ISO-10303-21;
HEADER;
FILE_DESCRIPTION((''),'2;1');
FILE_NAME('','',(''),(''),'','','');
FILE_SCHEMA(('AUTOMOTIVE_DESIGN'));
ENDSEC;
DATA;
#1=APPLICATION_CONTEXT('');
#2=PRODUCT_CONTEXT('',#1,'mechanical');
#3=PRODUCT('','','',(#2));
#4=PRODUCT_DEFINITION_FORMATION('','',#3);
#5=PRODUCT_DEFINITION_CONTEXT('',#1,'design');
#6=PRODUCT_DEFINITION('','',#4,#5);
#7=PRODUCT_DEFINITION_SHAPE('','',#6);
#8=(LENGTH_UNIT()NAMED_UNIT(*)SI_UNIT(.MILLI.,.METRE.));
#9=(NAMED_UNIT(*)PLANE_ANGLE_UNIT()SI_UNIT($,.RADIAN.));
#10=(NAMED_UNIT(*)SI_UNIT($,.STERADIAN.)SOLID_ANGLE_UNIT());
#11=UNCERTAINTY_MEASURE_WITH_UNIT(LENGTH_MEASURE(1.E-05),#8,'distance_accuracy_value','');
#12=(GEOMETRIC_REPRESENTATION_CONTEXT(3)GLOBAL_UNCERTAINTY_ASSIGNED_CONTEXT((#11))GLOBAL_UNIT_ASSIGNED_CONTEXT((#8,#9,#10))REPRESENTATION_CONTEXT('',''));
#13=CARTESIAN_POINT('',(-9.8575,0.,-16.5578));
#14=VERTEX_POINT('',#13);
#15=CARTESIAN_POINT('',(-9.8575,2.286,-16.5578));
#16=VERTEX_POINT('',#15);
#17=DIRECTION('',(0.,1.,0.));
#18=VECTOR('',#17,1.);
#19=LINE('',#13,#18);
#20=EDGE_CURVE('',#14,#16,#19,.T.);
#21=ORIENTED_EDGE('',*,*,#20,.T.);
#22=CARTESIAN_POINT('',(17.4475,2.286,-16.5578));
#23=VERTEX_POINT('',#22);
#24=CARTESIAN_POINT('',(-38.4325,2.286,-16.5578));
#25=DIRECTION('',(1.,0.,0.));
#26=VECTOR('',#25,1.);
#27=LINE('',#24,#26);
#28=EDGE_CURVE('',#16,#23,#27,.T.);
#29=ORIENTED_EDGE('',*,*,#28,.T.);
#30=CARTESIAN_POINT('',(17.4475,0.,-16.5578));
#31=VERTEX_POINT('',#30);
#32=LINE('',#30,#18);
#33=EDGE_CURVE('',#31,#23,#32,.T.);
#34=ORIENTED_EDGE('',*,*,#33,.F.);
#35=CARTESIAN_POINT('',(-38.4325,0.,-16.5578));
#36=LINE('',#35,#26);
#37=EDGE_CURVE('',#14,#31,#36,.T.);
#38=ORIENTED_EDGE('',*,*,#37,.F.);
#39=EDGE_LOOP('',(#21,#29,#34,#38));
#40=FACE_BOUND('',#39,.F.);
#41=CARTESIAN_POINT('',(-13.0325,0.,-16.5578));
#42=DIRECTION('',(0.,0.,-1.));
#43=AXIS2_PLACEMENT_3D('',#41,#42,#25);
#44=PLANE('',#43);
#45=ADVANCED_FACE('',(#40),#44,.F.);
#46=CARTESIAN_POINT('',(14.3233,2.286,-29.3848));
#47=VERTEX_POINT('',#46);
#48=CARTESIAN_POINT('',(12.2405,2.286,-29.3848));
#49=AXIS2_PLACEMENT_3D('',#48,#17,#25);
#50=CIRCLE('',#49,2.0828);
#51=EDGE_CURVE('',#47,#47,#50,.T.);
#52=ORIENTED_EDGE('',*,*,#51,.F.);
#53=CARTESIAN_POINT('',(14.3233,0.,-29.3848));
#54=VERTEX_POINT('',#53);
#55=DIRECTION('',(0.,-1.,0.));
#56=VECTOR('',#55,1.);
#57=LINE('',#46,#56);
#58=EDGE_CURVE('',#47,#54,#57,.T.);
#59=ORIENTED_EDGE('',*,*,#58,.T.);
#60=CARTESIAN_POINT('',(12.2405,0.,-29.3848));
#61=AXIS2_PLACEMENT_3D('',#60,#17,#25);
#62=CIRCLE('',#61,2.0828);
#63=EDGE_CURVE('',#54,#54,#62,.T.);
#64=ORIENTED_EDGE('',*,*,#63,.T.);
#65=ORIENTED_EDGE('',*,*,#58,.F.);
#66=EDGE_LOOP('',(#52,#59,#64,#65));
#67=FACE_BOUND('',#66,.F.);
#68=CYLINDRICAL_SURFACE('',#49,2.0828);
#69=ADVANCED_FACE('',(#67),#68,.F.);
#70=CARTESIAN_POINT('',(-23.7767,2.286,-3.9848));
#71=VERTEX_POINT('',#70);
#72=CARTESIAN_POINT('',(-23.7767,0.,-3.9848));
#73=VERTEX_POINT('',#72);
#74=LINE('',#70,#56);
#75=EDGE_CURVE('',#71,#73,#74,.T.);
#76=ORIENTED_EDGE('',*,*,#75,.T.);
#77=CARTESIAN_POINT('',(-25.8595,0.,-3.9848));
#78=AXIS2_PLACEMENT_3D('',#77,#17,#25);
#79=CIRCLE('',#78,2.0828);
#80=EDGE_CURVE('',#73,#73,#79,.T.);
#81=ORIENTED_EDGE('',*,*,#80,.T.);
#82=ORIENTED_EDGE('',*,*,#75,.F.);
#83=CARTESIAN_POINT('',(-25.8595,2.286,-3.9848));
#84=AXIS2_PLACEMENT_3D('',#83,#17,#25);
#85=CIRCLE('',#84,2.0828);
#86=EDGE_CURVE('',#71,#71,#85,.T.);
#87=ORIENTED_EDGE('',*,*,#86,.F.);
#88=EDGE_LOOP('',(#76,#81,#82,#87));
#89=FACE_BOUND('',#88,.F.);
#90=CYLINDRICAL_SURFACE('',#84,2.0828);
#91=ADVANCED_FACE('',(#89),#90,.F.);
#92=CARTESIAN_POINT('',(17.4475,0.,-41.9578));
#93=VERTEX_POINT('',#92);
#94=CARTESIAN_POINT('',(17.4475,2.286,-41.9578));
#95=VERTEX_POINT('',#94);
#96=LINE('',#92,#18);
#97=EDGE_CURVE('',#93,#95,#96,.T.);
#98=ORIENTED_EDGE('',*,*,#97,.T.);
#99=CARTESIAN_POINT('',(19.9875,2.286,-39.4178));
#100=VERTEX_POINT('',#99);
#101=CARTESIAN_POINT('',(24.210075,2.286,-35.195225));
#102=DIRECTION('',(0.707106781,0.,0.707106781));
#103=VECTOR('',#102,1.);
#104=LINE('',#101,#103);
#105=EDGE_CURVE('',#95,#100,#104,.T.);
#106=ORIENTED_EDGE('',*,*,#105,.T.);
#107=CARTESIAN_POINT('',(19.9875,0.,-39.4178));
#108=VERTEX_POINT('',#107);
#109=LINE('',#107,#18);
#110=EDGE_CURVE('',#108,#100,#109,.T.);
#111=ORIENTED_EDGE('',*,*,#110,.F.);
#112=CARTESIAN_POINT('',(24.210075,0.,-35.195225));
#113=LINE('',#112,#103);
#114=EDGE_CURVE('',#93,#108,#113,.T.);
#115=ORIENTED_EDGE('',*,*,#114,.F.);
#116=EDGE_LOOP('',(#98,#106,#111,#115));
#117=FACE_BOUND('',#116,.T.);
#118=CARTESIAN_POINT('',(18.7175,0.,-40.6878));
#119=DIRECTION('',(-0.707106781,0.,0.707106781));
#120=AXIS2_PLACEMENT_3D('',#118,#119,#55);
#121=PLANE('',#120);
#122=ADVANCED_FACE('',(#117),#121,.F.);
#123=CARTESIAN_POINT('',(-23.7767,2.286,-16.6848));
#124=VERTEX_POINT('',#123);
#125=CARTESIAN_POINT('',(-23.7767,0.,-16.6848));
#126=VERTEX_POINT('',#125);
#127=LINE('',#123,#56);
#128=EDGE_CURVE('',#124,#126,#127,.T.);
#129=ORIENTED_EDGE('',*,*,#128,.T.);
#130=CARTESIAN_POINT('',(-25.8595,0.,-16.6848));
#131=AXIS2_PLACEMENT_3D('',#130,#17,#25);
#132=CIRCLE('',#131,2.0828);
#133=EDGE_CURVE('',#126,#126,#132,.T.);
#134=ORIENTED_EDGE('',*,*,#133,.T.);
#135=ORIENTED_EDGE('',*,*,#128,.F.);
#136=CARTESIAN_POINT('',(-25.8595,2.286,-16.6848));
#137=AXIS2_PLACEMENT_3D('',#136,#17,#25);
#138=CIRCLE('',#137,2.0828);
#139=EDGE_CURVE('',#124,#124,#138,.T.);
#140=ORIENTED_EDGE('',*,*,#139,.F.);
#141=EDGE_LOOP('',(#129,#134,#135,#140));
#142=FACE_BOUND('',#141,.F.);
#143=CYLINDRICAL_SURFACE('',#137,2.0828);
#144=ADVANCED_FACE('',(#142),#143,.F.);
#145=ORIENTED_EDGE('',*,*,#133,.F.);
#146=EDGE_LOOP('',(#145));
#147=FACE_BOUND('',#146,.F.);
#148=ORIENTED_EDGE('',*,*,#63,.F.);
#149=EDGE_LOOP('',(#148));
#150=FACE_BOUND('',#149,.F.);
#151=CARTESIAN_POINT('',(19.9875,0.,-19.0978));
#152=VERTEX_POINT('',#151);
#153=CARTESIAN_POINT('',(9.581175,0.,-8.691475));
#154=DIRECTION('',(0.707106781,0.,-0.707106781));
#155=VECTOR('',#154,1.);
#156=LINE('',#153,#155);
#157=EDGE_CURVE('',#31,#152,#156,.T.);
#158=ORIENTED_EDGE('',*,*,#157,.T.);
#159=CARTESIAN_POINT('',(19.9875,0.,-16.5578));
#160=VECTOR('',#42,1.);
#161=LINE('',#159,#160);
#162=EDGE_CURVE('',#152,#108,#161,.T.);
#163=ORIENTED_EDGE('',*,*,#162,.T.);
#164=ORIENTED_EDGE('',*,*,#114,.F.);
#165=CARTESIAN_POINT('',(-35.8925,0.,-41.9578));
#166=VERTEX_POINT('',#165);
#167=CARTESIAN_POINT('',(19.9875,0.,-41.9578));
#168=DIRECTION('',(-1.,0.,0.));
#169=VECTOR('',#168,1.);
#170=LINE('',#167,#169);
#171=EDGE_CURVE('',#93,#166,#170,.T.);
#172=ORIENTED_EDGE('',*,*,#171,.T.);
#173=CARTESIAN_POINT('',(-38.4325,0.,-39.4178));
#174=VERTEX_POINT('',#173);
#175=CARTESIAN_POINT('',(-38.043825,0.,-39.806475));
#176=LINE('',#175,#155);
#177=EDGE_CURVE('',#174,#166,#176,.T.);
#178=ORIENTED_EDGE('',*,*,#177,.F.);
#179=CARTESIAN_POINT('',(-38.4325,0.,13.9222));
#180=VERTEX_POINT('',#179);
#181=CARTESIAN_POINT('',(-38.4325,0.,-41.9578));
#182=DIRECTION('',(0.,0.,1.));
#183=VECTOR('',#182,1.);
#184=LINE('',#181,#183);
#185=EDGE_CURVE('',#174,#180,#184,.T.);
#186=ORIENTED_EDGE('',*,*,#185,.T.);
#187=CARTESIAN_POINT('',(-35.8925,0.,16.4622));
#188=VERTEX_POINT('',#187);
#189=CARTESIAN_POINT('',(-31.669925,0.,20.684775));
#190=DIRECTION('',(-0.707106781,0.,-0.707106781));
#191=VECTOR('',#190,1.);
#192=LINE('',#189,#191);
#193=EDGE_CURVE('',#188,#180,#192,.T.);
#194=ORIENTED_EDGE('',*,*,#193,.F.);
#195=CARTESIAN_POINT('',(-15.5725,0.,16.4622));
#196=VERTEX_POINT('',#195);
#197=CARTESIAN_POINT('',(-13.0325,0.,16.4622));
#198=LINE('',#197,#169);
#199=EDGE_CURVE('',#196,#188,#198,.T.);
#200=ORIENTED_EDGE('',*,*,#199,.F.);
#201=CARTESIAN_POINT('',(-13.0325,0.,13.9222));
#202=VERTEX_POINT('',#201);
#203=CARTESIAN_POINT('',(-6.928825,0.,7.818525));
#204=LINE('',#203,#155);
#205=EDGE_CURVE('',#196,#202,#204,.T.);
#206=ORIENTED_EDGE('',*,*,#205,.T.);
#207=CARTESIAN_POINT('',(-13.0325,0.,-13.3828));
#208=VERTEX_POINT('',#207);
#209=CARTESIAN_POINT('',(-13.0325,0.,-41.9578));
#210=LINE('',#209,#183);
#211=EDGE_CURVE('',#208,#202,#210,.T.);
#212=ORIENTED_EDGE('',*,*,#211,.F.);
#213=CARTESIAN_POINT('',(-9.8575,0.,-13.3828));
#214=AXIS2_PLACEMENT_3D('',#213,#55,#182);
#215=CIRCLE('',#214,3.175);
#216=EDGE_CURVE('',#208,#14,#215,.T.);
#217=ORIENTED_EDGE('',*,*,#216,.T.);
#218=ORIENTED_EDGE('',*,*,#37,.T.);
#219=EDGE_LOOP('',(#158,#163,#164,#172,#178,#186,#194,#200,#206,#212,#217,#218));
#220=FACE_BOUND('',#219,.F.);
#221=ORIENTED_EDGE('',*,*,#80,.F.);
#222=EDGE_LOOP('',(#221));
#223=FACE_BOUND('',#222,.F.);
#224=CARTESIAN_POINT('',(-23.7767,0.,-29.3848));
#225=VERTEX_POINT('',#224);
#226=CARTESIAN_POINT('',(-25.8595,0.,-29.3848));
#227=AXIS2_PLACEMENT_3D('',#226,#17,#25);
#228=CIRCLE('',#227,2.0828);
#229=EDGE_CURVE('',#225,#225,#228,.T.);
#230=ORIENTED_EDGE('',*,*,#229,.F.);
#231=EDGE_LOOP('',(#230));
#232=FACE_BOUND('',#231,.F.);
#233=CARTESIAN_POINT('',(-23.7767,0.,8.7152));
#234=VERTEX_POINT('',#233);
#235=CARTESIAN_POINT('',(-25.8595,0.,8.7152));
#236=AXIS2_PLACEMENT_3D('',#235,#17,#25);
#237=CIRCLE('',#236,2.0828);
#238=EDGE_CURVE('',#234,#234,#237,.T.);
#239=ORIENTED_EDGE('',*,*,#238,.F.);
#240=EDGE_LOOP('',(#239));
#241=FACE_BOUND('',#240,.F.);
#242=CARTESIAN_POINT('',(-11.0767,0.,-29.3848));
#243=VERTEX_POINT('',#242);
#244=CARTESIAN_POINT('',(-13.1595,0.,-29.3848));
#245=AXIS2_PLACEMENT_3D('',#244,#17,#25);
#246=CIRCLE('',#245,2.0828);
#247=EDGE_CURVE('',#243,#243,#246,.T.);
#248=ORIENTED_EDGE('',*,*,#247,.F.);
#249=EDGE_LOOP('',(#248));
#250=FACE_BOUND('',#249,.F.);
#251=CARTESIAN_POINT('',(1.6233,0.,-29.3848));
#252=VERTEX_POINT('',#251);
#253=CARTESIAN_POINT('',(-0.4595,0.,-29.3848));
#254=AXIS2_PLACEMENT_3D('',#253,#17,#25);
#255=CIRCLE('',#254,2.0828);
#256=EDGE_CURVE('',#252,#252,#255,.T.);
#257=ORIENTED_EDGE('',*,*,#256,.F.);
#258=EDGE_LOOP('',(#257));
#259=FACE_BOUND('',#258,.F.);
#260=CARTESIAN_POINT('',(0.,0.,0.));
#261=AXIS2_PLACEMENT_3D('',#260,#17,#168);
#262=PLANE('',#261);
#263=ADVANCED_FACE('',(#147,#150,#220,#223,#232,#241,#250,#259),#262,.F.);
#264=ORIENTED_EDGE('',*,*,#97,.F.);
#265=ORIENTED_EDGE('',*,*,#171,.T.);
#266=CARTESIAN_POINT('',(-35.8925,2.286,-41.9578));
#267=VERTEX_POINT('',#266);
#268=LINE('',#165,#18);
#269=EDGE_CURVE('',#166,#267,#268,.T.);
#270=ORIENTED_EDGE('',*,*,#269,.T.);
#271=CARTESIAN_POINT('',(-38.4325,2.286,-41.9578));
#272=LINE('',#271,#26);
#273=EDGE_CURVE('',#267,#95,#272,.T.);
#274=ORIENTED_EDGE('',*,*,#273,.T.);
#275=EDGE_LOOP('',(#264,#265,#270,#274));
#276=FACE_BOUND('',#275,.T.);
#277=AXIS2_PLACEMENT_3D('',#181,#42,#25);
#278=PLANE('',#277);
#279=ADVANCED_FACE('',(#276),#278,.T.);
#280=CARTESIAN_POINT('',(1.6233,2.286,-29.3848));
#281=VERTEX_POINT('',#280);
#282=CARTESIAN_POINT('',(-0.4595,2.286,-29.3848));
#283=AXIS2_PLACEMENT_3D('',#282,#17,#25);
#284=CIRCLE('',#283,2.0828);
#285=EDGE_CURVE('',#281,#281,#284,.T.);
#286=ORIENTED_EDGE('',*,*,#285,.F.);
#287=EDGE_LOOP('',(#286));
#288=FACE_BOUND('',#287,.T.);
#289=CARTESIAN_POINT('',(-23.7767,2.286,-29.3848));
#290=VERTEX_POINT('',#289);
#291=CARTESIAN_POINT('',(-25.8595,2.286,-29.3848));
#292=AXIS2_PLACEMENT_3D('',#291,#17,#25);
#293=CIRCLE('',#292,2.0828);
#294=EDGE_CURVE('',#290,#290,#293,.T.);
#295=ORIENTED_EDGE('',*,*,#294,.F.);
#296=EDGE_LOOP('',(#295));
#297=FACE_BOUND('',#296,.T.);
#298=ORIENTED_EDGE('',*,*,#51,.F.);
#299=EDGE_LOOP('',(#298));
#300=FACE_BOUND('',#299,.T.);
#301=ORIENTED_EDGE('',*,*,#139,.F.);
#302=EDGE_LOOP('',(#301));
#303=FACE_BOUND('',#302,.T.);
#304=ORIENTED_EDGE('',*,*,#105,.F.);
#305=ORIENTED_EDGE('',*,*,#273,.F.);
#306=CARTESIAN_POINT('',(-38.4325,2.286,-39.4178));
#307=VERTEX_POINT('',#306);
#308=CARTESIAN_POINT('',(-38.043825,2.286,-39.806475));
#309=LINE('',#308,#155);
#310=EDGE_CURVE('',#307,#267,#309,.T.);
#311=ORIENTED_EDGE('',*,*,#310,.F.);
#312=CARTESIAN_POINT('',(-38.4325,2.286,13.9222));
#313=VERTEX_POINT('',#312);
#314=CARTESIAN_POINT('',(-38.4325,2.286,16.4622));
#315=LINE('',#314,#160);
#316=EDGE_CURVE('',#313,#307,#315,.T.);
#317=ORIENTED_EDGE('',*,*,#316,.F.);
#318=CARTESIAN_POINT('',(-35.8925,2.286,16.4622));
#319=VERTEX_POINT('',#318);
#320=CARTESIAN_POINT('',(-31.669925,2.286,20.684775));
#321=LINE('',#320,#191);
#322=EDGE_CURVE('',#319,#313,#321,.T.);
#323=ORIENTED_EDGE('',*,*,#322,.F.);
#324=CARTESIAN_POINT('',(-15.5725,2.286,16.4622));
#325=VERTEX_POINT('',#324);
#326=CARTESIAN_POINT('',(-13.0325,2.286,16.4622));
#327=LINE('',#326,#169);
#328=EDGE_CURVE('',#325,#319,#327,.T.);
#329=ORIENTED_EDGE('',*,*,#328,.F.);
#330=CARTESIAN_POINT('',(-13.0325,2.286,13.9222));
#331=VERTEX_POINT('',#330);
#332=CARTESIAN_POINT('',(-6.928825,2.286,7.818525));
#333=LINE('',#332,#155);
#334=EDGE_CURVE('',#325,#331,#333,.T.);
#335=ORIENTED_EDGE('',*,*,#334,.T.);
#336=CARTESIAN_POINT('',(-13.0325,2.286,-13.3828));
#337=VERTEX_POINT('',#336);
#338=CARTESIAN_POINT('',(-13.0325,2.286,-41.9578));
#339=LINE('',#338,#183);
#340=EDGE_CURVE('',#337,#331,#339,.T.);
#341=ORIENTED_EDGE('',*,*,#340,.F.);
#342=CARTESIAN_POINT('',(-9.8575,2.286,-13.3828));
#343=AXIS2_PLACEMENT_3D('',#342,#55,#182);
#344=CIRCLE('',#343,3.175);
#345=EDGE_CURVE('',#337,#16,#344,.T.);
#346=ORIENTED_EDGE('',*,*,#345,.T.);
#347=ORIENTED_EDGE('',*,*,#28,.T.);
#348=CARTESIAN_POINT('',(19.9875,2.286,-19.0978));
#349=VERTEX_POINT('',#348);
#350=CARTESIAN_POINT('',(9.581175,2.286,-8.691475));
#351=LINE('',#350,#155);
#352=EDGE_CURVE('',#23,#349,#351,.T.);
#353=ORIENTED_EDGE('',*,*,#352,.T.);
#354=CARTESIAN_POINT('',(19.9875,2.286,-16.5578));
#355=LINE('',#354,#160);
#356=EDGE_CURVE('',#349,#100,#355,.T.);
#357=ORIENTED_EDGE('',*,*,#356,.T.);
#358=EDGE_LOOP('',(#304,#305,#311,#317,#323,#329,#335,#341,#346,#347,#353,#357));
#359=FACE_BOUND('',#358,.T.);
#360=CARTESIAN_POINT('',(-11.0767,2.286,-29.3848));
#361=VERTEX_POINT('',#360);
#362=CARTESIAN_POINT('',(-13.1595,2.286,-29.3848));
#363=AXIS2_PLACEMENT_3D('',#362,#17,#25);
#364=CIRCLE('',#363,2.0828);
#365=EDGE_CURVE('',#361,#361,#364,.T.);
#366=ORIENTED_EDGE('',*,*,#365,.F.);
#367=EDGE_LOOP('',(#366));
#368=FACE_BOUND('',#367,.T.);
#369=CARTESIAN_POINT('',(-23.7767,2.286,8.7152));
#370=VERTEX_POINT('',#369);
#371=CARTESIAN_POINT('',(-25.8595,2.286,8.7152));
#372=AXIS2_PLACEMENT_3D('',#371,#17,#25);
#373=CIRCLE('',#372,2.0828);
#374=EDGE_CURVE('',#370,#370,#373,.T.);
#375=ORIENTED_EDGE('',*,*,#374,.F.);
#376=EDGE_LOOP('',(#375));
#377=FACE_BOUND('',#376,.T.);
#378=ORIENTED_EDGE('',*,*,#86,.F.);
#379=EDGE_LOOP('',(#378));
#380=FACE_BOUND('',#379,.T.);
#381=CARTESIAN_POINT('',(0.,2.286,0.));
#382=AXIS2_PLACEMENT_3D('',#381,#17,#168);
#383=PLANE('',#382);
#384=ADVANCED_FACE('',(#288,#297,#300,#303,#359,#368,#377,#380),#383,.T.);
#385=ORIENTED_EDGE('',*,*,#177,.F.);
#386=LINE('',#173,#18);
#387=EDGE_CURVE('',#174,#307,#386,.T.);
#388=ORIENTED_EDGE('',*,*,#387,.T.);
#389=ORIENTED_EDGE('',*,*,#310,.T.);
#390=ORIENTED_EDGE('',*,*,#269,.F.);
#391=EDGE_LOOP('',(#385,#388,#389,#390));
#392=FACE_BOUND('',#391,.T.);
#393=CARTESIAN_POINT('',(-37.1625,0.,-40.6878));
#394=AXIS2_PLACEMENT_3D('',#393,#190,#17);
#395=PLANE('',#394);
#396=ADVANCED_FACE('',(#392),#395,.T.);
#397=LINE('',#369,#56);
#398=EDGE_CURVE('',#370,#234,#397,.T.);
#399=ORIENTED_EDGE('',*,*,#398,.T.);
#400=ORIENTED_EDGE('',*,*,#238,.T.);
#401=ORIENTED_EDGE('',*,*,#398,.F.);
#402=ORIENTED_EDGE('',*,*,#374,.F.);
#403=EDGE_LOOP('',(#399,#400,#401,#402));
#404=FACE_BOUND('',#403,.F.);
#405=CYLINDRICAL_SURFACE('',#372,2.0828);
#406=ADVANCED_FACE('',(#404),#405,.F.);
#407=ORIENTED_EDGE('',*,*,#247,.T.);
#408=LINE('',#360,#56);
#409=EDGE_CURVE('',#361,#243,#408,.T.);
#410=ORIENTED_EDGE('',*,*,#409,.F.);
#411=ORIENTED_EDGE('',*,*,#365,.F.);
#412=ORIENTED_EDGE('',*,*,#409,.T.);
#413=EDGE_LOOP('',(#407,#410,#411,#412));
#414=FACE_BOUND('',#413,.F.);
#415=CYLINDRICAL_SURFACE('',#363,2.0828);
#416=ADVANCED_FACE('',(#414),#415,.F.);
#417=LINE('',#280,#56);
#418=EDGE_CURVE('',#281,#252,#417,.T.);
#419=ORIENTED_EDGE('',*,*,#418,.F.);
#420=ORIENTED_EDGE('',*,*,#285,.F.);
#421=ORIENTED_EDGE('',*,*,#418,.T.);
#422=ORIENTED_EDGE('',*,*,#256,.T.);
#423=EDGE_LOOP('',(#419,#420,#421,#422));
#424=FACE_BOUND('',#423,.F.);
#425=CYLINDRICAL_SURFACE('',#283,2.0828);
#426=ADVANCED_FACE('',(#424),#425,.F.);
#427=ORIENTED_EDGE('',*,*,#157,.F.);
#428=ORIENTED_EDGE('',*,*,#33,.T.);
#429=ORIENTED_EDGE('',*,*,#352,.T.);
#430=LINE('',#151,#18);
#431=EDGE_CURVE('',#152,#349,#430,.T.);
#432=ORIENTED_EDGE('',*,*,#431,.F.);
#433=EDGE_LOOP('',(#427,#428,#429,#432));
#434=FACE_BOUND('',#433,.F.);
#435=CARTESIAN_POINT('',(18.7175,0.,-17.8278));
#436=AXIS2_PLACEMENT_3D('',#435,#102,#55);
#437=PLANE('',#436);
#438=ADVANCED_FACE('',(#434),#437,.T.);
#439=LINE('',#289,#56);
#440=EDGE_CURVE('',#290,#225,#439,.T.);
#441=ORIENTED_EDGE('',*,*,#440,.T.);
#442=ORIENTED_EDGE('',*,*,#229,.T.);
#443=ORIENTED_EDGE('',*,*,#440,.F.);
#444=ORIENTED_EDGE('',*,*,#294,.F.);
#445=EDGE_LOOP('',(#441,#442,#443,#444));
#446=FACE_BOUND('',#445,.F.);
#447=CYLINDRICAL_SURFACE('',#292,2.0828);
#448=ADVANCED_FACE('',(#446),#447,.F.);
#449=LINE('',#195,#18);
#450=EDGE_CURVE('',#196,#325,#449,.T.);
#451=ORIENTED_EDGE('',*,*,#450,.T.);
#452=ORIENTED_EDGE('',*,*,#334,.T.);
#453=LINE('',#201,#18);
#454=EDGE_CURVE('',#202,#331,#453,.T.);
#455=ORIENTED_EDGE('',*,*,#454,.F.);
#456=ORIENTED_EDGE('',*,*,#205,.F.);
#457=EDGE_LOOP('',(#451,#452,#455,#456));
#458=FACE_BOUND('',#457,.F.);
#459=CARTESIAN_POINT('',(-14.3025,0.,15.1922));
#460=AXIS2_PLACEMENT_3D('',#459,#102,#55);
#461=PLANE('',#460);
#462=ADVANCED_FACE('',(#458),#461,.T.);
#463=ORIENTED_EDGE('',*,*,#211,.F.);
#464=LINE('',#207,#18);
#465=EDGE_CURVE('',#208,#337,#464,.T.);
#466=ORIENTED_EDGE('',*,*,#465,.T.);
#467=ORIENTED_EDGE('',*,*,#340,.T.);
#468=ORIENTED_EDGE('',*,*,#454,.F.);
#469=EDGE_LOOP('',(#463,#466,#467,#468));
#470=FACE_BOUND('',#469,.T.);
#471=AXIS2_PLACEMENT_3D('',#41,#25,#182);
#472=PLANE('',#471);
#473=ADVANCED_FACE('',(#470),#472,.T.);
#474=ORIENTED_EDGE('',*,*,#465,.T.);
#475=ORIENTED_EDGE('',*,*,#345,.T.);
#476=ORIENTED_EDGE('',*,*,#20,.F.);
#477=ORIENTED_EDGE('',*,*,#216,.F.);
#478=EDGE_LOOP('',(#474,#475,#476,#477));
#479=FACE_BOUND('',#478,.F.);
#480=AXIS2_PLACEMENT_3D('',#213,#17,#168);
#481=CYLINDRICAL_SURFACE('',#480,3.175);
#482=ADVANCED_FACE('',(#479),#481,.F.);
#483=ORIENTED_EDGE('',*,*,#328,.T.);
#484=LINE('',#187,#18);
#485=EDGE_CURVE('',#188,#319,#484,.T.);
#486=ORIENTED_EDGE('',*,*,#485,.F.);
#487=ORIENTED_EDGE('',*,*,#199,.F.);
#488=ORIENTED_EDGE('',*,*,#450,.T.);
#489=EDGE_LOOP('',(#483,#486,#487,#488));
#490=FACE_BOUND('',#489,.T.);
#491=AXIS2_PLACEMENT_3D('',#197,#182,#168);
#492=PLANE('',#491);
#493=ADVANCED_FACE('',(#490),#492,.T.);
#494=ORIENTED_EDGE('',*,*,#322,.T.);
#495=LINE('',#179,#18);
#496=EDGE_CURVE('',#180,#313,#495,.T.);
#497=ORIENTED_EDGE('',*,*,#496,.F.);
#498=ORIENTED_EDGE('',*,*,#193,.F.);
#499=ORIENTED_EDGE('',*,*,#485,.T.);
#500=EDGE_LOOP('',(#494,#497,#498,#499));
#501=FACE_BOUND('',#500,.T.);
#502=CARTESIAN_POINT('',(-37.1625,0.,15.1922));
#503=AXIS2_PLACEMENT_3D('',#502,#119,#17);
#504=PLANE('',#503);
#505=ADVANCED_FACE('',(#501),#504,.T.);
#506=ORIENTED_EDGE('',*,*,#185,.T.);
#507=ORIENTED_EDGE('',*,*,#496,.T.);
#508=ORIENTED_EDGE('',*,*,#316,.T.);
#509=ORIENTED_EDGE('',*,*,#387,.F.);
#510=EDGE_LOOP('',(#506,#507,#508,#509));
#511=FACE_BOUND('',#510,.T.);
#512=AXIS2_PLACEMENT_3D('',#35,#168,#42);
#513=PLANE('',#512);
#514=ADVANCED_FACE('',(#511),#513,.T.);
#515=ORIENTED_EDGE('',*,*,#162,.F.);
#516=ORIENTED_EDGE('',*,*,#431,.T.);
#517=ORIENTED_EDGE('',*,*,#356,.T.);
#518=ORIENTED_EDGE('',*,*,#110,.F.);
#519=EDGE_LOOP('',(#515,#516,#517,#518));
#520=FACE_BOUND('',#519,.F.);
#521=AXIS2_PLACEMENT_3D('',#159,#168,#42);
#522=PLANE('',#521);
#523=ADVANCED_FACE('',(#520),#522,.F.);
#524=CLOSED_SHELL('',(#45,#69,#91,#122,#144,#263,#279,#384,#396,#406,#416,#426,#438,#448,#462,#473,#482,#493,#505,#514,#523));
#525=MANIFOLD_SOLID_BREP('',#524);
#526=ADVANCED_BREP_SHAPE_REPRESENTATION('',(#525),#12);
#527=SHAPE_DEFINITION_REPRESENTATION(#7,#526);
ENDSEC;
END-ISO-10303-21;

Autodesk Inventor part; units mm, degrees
ref_plane "YZ Plane" through (0, 0, 0) normal (1, 0, 0) x (0, 1, 0)
ref_plane "XZ Plane" through (0, 0, 0) normal (0, 1, 0) x (-1, 0, 0)
ref_plane "XY Plane" through (0, 0, 0) normal (0, 0, 1) x (1, 0, 0)
sketch "Sketch1" plane through (0, 0, 0) normal (0, 1, 0) x (-1, 0, 0)
  line L0 (38.4325, -41.9578) -> (13.0325, -41.9578)
  line L1 (13.0325, -41.9578) -> (13.0325, 16.4622)
  line L2 (13.0325, 16.4622) -> (38.4325, 16.4622)
  line L3 (38.4325, 16.4622) -> (38.4325, -41.9578)
  line L4 (38.4325, -41.9578) -> (-9.6784, 6.153) construction
  line L5 (38.4325, -41.9578) -> (38.4325, -16.5578)
  line L6 (38.4325, -16.5578) -> (-19.9875, -16.5578)
  line L7 (-19.9875, -16.5578) -> (-19.9875, -41.9578)
  line L8 (-19.9875, -41.9578) -> (38.4325, -41.9578)
  point P0 (0, 0)
  point P1 (13.0325, -16.5578)
  dimension "d0" = 25.4
  dimension "d1" = 58.42
  dimension "d2" = 45
extrude "Extrusion1" add sketch "Sketch1" along normal blind 2.286
chamfer "Chamfer1" distance 2.54 angle 45 1 edges at (-13.0325, 1.143, 16.4622)
chamfer "Chamfer2" distance 2.54 angle 45 4 edges at (-38.4325, 1.143, 16.4622) (19.9875, 1.143, -16.5578) (19.9875, 1.143, -41.9578) (-38.4325, 1.143, -41.9578)
fillet "Fillet1" radius 3.175 1 edges at (-13.0325, 1.143, -16.5578)
sketch "Sketch2" plane through (0, 2.286, 0) normal (0, 1, 0) x (1, 0, 0)
  circle A0 centre (-25.8595, 29.3848) radius 2.0828
  line L0 (17.4475, 41.9578) -> (-35.8925, 41.9578) projected
  line L1 (19.9875, 19.0978) -> (19.9875, 39.4178) projected
  line L2 (-38.4325, 39.4178) -> (-38.4325, -13.9222) projected
  point P0 (0, 0)
  dimension "d12" = 12.573
  dimension "d14" = 4.1656
  dimension "d23" = 12.573
extrude "Extrusion2" cut sketch "Sketch2" against normal blind 2.286
pattern_linear "Rectangular Pattern1" count 5 spacing 12.7 along (0, 0, 1) of "Extrusion2"
pattern_linear "Rectangular Pattern2" count 5 spacing 12.7 along (1, 0, 0) of "Extrusion2"
properties part number "ShortenedVersaGusset 90o"
